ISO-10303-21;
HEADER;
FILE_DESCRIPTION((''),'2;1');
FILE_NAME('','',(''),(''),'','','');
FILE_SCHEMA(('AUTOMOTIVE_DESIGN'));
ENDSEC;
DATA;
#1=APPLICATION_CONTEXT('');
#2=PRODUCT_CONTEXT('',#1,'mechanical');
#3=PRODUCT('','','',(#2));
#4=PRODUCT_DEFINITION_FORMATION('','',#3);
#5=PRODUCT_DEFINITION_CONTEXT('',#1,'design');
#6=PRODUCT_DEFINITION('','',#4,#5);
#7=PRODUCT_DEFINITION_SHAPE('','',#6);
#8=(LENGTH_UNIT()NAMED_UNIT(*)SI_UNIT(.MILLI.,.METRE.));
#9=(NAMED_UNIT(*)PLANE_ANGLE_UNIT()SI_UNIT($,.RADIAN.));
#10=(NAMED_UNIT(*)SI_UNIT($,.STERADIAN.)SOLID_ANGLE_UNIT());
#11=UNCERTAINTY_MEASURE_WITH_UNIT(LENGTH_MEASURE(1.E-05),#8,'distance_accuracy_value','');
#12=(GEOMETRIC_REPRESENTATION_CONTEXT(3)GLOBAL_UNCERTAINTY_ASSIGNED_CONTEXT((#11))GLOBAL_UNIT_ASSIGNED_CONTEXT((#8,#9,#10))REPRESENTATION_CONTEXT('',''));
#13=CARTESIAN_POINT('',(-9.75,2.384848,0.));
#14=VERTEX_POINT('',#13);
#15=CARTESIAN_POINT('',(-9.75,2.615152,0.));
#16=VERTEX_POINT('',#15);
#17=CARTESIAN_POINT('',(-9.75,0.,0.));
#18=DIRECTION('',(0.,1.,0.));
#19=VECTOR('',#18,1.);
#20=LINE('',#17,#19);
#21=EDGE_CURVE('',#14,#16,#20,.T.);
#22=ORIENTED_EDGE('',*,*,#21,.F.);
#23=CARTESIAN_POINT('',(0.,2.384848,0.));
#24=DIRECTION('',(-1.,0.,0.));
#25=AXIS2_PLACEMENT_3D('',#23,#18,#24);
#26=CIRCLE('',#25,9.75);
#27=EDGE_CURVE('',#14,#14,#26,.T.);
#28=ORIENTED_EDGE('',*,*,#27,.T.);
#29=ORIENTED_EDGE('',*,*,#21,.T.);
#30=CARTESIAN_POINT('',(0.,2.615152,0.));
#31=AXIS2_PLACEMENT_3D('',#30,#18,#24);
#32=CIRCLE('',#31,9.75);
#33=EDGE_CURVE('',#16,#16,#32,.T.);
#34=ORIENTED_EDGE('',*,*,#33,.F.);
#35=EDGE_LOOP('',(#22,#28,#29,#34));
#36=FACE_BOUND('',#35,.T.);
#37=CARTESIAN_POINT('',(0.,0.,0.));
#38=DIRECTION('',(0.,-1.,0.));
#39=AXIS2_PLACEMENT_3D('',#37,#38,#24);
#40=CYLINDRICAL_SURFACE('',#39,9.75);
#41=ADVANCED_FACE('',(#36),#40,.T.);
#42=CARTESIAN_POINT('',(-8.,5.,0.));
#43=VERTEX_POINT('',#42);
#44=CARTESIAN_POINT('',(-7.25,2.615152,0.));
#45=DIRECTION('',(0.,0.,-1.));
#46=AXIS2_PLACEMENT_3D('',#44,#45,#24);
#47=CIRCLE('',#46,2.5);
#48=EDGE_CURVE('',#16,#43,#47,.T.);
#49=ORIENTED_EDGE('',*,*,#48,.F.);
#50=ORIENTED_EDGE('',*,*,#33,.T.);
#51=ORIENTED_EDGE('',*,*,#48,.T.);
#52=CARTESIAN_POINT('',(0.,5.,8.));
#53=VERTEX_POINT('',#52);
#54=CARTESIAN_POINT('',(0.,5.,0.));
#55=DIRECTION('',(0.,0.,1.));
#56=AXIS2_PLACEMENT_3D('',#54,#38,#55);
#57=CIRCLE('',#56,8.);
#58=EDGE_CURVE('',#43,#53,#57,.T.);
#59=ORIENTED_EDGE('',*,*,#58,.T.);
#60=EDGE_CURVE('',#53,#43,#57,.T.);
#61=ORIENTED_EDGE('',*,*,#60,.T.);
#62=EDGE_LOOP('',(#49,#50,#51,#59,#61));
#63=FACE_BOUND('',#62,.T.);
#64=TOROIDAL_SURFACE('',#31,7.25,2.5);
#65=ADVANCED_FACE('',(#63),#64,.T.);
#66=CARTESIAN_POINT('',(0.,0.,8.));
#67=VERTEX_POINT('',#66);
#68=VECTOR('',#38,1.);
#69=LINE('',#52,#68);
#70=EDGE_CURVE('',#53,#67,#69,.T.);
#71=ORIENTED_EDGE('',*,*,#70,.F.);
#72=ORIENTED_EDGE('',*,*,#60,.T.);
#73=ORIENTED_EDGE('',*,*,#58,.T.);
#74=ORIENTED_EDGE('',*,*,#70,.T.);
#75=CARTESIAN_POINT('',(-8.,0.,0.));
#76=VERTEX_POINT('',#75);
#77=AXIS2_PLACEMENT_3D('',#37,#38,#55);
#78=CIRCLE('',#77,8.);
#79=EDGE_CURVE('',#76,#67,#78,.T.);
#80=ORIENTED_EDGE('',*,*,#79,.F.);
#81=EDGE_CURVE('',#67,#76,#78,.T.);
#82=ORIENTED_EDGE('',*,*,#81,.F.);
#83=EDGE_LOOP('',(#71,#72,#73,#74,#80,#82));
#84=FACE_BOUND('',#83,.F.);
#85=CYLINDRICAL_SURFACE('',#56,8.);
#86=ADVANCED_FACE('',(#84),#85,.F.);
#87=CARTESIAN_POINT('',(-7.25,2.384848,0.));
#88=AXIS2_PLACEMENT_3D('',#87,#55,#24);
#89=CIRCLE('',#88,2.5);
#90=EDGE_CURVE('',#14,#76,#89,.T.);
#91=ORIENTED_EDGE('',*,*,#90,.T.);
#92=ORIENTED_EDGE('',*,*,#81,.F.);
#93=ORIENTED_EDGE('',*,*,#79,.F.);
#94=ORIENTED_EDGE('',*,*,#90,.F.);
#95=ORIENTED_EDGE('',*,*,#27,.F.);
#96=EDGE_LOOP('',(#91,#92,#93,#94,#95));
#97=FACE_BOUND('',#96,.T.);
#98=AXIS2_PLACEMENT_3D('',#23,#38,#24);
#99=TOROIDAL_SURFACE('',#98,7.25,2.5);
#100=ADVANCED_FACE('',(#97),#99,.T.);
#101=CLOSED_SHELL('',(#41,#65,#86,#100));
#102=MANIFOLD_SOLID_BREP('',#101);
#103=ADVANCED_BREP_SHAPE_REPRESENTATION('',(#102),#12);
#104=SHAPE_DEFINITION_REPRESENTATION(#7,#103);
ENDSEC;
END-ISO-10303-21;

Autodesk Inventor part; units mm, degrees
ref_plane "YZ Plane" through (0, 0, 0) normal (1, 0, 0) x (0, 1, 0)
ref_plane "XZ Plane" through (0, 0, 0) normal (0, 1, 0) x (-1, 0, 0)
ref_plane "XY Plane" through (0, 0, 0) normal (0, 0, 1) x (1, 0, 0)
sketch "Boceto1" plane through (0, 0, 0) normal (0, 1, 0) x (-1, 0, 0)
  circle A0 centre (0, 0) radius 9.75
  dimension "d0" = 19.5
extrude "Extrusión1" add sketch "Boceto1" along normal blind 5
sketch "Boceto3" plane through (0, 5, 0) normal (0, 1, 0) x (1, 0, 0)
  circle A0 centre (0, 0) radius 9.75 projected
hole "Agujero2" at (0, 5, 0) direction (0, -1, 0) diameter 16 depth 5 tip angle 118
fillet "Empalme3" radius 2.5 2 edges at (9.75, 5, 0) (9.75, 0, 0)
properties part number "exterior"
